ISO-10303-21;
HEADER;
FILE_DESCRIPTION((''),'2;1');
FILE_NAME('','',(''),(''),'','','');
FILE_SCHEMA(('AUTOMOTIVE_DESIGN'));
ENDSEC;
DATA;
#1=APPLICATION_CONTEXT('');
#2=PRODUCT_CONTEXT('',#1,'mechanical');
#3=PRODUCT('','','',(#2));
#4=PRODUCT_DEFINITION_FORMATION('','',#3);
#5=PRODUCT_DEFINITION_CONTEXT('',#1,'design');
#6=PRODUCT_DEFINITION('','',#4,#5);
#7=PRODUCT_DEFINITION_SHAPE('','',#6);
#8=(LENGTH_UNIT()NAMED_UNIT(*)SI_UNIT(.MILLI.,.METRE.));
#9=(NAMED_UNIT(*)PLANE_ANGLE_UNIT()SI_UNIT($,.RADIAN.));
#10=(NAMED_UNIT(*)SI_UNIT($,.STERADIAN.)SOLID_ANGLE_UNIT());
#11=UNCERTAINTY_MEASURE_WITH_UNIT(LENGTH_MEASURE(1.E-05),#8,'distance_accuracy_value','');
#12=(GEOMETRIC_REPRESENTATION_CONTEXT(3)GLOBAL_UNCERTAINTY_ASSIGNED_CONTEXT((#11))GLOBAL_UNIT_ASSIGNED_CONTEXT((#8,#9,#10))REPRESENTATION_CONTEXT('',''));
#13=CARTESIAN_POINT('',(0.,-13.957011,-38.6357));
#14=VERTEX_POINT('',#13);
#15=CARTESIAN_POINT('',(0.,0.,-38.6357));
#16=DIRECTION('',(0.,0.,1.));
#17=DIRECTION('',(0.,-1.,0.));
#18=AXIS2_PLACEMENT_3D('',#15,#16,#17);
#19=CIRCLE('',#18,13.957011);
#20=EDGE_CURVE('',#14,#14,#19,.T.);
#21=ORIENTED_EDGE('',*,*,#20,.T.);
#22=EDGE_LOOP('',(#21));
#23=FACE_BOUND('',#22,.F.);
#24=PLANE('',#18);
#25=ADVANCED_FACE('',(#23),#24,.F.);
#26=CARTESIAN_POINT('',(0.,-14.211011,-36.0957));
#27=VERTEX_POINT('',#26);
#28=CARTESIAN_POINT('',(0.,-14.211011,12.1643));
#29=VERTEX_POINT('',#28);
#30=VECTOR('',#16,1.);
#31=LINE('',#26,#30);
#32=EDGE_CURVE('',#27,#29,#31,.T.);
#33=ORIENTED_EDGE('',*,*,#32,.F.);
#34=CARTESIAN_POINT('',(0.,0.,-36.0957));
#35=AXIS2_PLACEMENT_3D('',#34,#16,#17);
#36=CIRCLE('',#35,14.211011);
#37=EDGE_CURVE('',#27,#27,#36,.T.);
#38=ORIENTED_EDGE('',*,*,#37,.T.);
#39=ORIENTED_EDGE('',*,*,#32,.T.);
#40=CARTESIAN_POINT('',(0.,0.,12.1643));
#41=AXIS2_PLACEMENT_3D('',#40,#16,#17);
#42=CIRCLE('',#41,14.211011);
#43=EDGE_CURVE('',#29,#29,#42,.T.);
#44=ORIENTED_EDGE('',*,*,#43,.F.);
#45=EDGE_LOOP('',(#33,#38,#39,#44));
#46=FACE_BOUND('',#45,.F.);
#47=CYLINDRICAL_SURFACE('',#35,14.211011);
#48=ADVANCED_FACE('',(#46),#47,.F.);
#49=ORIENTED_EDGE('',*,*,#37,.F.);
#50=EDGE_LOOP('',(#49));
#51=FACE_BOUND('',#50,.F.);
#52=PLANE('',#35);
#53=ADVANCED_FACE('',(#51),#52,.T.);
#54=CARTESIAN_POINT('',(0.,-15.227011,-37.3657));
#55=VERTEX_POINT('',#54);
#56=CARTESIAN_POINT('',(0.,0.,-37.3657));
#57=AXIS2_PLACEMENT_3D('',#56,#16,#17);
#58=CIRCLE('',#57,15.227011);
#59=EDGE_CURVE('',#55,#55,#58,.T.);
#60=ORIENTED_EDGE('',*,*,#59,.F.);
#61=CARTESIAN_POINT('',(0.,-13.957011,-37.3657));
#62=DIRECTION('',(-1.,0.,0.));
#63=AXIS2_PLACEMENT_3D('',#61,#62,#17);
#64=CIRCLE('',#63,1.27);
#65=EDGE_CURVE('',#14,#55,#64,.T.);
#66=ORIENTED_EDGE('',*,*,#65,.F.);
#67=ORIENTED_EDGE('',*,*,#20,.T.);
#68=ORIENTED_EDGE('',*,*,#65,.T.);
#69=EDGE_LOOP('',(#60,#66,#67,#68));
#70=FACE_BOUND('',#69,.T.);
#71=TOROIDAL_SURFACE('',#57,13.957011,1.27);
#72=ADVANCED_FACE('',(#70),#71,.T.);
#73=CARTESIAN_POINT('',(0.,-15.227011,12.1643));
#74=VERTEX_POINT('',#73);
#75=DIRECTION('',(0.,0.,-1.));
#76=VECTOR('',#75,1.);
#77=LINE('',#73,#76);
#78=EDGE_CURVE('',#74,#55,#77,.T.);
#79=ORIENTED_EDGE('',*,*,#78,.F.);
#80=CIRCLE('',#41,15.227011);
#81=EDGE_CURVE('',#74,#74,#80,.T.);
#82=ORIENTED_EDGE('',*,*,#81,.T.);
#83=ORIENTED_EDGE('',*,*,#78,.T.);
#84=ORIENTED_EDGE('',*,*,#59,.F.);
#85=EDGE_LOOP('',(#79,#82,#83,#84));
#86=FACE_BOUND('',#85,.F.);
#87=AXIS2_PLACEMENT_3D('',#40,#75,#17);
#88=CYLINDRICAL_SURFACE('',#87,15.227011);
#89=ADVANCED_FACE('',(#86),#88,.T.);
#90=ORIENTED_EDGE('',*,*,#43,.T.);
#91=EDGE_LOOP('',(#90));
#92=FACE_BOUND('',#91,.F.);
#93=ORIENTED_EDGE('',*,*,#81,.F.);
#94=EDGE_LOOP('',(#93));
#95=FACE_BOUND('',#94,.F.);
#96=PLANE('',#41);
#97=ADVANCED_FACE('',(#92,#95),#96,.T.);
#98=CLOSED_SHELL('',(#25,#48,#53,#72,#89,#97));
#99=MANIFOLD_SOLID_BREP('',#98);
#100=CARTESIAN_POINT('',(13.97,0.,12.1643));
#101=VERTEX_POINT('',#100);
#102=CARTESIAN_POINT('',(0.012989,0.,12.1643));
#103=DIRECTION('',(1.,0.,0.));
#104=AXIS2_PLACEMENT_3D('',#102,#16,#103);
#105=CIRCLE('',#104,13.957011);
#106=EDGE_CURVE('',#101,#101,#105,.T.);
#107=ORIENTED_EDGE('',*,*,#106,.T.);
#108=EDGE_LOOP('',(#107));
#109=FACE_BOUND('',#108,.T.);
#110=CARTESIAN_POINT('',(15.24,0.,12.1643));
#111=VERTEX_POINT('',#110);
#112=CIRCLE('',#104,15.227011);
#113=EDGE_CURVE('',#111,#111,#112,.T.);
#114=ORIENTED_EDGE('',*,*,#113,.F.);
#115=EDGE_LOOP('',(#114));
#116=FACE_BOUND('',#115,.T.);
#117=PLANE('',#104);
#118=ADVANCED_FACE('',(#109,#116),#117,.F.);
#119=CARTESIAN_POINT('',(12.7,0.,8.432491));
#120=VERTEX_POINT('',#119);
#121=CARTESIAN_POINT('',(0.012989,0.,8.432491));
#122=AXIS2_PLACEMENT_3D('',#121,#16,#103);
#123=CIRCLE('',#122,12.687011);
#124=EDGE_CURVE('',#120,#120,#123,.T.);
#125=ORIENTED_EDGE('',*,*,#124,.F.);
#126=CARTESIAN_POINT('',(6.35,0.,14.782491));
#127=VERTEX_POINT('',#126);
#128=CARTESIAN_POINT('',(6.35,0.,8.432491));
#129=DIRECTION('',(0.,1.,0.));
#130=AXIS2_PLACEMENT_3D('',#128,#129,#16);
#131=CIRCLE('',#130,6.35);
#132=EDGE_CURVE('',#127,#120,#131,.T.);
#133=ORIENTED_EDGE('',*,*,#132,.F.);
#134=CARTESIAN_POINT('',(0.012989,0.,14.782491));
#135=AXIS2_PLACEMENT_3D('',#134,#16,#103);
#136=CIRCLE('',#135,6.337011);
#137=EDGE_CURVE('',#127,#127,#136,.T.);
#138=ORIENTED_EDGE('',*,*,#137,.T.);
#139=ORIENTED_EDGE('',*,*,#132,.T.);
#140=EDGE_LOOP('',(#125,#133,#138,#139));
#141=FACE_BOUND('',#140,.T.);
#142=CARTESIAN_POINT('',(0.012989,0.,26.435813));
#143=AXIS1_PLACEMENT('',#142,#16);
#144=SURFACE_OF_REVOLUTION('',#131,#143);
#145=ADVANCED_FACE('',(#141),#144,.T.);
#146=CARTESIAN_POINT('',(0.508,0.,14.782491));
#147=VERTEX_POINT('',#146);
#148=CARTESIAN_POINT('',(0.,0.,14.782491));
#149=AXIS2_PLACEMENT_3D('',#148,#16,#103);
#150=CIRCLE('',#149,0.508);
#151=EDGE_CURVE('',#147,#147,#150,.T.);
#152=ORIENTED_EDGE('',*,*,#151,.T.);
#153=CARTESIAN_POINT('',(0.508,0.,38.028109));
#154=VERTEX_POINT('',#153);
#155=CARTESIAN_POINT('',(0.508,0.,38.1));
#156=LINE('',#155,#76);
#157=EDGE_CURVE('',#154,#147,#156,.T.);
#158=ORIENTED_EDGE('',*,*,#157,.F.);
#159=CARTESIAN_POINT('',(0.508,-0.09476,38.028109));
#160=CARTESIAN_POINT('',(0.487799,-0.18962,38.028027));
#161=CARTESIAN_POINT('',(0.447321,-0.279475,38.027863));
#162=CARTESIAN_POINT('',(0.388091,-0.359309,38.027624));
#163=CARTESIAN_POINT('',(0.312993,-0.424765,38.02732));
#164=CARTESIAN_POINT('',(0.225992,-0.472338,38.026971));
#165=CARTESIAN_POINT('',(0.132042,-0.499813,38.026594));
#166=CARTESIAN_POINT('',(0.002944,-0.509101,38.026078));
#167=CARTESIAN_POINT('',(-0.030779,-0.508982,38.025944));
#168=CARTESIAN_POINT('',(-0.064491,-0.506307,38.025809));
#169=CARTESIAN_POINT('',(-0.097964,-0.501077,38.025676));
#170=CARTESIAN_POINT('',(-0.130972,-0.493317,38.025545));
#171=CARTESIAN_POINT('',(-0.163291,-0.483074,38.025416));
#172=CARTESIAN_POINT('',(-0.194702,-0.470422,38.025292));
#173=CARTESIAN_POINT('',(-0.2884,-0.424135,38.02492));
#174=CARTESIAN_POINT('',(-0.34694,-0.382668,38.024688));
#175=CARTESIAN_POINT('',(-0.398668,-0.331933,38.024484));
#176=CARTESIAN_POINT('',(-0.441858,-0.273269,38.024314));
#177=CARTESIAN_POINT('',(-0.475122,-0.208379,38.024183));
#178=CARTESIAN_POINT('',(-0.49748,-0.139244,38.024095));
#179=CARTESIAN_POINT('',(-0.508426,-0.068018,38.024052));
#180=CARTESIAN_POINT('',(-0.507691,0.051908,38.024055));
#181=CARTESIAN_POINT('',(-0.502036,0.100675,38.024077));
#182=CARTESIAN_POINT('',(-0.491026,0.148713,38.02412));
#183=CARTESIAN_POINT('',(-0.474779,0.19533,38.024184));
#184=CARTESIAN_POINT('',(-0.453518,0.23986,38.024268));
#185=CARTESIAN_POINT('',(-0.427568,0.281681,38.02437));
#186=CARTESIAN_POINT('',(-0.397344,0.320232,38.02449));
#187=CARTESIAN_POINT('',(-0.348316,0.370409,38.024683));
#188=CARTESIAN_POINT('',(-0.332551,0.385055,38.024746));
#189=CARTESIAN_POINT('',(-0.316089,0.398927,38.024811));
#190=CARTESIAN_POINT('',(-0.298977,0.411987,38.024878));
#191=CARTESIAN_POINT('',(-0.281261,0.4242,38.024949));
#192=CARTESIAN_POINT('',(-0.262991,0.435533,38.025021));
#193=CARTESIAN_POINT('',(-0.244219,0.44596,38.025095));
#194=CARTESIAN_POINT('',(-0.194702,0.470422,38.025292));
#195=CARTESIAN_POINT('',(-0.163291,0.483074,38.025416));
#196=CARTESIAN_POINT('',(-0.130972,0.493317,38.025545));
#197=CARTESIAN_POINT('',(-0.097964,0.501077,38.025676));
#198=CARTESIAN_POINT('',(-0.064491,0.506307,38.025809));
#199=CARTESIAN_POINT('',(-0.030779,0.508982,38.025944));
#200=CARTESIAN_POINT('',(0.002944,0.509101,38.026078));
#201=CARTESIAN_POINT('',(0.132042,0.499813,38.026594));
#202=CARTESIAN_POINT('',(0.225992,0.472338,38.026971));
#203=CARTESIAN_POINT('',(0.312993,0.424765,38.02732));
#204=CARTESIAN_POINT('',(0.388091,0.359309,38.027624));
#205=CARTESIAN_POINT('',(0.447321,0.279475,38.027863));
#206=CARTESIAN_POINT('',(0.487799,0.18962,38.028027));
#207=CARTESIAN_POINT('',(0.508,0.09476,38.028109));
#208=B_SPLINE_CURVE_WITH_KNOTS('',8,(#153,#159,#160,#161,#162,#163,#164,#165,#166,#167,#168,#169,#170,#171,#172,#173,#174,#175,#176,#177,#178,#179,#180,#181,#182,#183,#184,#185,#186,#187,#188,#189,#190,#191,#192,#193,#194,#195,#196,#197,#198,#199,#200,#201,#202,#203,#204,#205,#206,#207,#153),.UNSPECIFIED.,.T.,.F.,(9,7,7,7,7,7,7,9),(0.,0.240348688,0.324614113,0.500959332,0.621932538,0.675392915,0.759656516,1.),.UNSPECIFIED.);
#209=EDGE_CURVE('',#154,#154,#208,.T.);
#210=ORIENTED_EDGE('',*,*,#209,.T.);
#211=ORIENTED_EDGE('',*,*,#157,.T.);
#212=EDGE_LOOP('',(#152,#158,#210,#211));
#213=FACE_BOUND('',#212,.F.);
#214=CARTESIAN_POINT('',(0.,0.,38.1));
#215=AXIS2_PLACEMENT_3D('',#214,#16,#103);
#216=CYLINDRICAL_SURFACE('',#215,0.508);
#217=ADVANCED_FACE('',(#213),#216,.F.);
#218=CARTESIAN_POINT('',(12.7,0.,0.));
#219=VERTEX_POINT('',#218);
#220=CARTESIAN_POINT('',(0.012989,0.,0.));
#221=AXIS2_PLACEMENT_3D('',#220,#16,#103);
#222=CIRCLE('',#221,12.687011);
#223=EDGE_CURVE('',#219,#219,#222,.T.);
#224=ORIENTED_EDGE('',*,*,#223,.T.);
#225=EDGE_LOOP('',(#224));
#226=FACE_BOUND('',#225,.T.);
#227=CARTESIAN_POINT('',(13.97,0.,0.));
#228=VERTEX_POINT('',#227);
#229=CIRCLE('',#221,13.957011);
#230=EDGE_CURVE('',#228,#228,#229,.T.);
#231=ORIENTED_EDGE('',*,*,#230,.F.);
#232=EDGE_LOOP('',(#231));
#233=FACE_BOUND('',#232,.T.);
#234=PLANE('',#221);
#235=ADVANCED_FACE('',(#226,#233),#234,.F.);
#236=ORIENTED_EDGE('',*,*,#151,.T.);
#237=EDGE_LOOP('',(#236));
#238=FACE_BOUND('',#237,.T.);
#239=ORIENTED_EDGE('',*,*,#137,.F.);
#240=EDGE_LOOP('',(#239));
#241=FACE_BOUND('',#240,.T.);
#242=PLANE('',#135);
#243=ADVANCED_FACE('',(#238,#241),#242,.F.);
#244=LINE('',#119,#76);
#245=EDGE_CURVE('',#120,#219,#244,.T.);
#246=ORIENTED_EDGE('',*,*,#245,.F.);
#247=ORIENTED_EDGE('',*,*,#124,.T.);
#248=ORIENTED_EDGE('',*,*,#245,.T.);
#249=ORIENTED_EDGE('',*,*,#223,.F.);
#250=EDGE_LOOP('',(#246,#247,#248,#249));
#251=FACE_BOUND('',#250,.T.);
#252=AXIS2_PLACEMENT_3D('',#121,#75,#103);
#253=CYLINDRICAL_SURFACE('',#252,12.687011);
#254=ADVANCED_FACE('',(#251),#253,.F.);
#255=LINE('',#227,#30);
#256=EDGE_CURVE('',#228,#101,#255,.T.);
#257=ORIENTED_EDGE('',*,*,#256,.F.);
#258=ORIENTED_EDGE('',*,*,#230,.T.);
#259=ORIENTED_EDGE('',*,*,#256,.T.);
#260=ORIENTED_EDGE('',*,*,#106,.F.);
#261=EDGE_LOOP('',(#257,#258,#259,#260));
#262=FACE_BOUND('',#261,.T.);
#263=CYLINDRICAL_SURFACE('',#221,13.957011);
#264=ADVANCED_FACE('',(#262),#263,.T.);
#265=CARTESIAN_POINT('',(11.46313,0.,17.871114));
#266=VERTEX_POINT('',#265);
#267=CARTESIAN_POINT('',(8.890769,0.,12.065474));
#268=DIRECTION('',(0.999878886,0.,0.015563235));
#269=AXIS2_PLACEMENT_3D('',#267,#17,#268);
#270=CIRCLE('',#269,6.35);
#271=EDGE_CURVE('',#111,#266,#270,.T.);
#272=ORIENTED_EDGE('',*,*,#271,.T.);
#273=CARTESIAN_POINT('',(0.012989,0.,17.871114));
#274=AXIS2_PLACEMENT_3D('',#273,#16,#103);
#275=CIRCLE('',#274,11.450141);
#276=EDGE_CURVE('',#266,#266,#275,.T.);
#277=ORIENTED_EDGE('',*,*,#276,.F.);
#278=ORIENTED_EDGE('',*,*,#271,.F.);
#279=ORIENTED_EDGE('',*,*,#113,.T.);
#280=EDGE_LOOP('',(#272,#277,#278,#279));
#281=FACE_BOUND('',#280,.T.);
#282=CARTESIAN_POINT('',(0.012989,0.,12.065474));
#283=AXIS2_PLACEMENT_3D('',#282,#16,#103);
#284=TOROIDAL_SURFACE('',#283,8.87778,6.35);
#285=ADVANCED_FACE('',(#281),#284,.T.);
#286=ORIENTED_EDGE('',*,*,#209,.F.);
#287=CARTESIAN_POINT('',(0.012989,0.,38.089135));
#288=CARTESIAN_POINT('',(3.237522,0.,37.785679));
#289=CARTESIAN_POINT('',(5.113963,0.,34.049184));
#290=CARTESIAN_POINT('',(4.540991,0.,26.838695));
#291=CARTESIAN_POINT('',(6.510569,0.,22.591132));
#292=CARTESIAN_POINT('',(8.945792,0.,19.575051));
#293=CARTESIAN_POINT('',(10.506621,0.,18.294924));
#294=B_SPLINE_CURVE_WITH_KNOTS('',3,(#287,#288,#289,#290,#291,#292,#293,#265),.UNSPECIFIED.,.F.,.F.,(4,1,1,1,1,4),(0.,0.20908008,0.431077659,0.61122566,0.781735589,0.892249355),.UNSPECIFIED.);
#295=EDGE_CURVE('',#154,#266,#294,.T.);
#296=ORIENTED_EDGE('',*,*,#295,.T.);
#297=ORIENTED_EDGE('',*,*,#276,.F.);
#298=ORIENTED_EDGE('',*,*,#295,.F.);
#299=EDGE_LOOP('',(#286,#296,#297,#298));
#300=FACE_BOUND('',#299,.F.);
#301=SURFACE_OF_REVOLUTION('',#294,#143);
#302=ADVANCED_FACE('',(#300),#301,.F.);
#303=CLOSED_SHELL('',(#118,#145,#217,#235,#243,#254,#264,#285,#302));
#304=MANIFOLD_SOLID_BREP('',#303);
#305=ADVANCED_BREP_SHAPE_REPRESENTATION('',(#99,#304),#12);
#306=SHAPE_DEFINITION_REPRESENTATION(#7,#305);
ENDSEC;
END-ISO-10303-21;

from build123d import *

# Parameters (mm, degrees)
F4_R     = 1.27
F6_R     = 0.508
F7_DEPTH = 2540


with BuildPart() as f1:
    # F0 (on Front) → F1 (revolve)
    with BuildSketch(Plane.XZ):
        with BuildLine():
            Line((0.0129888206, 38.0891347453), (0.0129888206, 14.7824911401))
            Line((0.0129888206, 14.7824911401), (6.35, 14.7824911401))
            ThreePointArc((6.35, 14.7824911401), (10.8401280605, 12.9226192006), (12.7, 8.4324911401))
            Line((12.7, 8.4324911401), (12.7, 0))
            Line((12.7, 0), (13.97, 0))
            Line((13.97, 0), (13.97, 12.1643003333))
            Line((13.97, 12.1643003333), (15.24, 12.1643003333))
            ThreePointArc((15.24, 12.1643003333), (14.1861096276, 15.570023473), (11.4631301434, 17.8711140296))
            add(Edge.make_bspline(
                [(0.0129888206, 38.0891347453), (3.2375221603, 37.7856792591), (5.1139625625, 34.0491835059), (4.5409913214, 26.8386946553), (6.510569033, 22.5911322118), (8.9457915552, 19.5750505607), (10.5066207336, 18.2949238879), (11.4631301434, 17.8711140296)],
                knots=[0, 0, 0, 0, 0.2090800805, 0.4310776593, 0.6112256598, 0.7817355895, 0.8922493546, 0.8922493546, 0.8922493546, 0.8922493546], degree=3))
        make_face()
    revolve(axis=Axis((0.0129888206, 0, 26.4358129427), (0, 0, 1)))

    # F6 (on offset) → F7 (cut)
    with BuildSketch(Plane.XY.offset(38.1)):
        Circle(F6_R)
    extrude(amount=-F7_DEPTH, mode=Mode.SUBTRACT)


with BuildPart() as f3:
    # F2 (on Right) → F3 (revolve)
    with BuildSketch(Plane.YZ):
        Polygon((-15.2270111794, -38.6356996667), (0, -38.6356996667), (0, -36.0956996667), (-14.2110111794, -36.0956996667), (-14.2110111794, 12.1643003333), (-15.2270111794, 12.1643003333), align=None)
    revolve(axis=Axis((0, 0, -37.3656996667), (0, 0, 1)))

    # F4
    f4_edges = [f3.edges().sort_by_distance(p)[0] for p in [
        (0, 15.227011, -38.6357),
    ]]
    fillet(f4_edges, radius=F4_R)


solid = Compound([f1.part, f3.part])
